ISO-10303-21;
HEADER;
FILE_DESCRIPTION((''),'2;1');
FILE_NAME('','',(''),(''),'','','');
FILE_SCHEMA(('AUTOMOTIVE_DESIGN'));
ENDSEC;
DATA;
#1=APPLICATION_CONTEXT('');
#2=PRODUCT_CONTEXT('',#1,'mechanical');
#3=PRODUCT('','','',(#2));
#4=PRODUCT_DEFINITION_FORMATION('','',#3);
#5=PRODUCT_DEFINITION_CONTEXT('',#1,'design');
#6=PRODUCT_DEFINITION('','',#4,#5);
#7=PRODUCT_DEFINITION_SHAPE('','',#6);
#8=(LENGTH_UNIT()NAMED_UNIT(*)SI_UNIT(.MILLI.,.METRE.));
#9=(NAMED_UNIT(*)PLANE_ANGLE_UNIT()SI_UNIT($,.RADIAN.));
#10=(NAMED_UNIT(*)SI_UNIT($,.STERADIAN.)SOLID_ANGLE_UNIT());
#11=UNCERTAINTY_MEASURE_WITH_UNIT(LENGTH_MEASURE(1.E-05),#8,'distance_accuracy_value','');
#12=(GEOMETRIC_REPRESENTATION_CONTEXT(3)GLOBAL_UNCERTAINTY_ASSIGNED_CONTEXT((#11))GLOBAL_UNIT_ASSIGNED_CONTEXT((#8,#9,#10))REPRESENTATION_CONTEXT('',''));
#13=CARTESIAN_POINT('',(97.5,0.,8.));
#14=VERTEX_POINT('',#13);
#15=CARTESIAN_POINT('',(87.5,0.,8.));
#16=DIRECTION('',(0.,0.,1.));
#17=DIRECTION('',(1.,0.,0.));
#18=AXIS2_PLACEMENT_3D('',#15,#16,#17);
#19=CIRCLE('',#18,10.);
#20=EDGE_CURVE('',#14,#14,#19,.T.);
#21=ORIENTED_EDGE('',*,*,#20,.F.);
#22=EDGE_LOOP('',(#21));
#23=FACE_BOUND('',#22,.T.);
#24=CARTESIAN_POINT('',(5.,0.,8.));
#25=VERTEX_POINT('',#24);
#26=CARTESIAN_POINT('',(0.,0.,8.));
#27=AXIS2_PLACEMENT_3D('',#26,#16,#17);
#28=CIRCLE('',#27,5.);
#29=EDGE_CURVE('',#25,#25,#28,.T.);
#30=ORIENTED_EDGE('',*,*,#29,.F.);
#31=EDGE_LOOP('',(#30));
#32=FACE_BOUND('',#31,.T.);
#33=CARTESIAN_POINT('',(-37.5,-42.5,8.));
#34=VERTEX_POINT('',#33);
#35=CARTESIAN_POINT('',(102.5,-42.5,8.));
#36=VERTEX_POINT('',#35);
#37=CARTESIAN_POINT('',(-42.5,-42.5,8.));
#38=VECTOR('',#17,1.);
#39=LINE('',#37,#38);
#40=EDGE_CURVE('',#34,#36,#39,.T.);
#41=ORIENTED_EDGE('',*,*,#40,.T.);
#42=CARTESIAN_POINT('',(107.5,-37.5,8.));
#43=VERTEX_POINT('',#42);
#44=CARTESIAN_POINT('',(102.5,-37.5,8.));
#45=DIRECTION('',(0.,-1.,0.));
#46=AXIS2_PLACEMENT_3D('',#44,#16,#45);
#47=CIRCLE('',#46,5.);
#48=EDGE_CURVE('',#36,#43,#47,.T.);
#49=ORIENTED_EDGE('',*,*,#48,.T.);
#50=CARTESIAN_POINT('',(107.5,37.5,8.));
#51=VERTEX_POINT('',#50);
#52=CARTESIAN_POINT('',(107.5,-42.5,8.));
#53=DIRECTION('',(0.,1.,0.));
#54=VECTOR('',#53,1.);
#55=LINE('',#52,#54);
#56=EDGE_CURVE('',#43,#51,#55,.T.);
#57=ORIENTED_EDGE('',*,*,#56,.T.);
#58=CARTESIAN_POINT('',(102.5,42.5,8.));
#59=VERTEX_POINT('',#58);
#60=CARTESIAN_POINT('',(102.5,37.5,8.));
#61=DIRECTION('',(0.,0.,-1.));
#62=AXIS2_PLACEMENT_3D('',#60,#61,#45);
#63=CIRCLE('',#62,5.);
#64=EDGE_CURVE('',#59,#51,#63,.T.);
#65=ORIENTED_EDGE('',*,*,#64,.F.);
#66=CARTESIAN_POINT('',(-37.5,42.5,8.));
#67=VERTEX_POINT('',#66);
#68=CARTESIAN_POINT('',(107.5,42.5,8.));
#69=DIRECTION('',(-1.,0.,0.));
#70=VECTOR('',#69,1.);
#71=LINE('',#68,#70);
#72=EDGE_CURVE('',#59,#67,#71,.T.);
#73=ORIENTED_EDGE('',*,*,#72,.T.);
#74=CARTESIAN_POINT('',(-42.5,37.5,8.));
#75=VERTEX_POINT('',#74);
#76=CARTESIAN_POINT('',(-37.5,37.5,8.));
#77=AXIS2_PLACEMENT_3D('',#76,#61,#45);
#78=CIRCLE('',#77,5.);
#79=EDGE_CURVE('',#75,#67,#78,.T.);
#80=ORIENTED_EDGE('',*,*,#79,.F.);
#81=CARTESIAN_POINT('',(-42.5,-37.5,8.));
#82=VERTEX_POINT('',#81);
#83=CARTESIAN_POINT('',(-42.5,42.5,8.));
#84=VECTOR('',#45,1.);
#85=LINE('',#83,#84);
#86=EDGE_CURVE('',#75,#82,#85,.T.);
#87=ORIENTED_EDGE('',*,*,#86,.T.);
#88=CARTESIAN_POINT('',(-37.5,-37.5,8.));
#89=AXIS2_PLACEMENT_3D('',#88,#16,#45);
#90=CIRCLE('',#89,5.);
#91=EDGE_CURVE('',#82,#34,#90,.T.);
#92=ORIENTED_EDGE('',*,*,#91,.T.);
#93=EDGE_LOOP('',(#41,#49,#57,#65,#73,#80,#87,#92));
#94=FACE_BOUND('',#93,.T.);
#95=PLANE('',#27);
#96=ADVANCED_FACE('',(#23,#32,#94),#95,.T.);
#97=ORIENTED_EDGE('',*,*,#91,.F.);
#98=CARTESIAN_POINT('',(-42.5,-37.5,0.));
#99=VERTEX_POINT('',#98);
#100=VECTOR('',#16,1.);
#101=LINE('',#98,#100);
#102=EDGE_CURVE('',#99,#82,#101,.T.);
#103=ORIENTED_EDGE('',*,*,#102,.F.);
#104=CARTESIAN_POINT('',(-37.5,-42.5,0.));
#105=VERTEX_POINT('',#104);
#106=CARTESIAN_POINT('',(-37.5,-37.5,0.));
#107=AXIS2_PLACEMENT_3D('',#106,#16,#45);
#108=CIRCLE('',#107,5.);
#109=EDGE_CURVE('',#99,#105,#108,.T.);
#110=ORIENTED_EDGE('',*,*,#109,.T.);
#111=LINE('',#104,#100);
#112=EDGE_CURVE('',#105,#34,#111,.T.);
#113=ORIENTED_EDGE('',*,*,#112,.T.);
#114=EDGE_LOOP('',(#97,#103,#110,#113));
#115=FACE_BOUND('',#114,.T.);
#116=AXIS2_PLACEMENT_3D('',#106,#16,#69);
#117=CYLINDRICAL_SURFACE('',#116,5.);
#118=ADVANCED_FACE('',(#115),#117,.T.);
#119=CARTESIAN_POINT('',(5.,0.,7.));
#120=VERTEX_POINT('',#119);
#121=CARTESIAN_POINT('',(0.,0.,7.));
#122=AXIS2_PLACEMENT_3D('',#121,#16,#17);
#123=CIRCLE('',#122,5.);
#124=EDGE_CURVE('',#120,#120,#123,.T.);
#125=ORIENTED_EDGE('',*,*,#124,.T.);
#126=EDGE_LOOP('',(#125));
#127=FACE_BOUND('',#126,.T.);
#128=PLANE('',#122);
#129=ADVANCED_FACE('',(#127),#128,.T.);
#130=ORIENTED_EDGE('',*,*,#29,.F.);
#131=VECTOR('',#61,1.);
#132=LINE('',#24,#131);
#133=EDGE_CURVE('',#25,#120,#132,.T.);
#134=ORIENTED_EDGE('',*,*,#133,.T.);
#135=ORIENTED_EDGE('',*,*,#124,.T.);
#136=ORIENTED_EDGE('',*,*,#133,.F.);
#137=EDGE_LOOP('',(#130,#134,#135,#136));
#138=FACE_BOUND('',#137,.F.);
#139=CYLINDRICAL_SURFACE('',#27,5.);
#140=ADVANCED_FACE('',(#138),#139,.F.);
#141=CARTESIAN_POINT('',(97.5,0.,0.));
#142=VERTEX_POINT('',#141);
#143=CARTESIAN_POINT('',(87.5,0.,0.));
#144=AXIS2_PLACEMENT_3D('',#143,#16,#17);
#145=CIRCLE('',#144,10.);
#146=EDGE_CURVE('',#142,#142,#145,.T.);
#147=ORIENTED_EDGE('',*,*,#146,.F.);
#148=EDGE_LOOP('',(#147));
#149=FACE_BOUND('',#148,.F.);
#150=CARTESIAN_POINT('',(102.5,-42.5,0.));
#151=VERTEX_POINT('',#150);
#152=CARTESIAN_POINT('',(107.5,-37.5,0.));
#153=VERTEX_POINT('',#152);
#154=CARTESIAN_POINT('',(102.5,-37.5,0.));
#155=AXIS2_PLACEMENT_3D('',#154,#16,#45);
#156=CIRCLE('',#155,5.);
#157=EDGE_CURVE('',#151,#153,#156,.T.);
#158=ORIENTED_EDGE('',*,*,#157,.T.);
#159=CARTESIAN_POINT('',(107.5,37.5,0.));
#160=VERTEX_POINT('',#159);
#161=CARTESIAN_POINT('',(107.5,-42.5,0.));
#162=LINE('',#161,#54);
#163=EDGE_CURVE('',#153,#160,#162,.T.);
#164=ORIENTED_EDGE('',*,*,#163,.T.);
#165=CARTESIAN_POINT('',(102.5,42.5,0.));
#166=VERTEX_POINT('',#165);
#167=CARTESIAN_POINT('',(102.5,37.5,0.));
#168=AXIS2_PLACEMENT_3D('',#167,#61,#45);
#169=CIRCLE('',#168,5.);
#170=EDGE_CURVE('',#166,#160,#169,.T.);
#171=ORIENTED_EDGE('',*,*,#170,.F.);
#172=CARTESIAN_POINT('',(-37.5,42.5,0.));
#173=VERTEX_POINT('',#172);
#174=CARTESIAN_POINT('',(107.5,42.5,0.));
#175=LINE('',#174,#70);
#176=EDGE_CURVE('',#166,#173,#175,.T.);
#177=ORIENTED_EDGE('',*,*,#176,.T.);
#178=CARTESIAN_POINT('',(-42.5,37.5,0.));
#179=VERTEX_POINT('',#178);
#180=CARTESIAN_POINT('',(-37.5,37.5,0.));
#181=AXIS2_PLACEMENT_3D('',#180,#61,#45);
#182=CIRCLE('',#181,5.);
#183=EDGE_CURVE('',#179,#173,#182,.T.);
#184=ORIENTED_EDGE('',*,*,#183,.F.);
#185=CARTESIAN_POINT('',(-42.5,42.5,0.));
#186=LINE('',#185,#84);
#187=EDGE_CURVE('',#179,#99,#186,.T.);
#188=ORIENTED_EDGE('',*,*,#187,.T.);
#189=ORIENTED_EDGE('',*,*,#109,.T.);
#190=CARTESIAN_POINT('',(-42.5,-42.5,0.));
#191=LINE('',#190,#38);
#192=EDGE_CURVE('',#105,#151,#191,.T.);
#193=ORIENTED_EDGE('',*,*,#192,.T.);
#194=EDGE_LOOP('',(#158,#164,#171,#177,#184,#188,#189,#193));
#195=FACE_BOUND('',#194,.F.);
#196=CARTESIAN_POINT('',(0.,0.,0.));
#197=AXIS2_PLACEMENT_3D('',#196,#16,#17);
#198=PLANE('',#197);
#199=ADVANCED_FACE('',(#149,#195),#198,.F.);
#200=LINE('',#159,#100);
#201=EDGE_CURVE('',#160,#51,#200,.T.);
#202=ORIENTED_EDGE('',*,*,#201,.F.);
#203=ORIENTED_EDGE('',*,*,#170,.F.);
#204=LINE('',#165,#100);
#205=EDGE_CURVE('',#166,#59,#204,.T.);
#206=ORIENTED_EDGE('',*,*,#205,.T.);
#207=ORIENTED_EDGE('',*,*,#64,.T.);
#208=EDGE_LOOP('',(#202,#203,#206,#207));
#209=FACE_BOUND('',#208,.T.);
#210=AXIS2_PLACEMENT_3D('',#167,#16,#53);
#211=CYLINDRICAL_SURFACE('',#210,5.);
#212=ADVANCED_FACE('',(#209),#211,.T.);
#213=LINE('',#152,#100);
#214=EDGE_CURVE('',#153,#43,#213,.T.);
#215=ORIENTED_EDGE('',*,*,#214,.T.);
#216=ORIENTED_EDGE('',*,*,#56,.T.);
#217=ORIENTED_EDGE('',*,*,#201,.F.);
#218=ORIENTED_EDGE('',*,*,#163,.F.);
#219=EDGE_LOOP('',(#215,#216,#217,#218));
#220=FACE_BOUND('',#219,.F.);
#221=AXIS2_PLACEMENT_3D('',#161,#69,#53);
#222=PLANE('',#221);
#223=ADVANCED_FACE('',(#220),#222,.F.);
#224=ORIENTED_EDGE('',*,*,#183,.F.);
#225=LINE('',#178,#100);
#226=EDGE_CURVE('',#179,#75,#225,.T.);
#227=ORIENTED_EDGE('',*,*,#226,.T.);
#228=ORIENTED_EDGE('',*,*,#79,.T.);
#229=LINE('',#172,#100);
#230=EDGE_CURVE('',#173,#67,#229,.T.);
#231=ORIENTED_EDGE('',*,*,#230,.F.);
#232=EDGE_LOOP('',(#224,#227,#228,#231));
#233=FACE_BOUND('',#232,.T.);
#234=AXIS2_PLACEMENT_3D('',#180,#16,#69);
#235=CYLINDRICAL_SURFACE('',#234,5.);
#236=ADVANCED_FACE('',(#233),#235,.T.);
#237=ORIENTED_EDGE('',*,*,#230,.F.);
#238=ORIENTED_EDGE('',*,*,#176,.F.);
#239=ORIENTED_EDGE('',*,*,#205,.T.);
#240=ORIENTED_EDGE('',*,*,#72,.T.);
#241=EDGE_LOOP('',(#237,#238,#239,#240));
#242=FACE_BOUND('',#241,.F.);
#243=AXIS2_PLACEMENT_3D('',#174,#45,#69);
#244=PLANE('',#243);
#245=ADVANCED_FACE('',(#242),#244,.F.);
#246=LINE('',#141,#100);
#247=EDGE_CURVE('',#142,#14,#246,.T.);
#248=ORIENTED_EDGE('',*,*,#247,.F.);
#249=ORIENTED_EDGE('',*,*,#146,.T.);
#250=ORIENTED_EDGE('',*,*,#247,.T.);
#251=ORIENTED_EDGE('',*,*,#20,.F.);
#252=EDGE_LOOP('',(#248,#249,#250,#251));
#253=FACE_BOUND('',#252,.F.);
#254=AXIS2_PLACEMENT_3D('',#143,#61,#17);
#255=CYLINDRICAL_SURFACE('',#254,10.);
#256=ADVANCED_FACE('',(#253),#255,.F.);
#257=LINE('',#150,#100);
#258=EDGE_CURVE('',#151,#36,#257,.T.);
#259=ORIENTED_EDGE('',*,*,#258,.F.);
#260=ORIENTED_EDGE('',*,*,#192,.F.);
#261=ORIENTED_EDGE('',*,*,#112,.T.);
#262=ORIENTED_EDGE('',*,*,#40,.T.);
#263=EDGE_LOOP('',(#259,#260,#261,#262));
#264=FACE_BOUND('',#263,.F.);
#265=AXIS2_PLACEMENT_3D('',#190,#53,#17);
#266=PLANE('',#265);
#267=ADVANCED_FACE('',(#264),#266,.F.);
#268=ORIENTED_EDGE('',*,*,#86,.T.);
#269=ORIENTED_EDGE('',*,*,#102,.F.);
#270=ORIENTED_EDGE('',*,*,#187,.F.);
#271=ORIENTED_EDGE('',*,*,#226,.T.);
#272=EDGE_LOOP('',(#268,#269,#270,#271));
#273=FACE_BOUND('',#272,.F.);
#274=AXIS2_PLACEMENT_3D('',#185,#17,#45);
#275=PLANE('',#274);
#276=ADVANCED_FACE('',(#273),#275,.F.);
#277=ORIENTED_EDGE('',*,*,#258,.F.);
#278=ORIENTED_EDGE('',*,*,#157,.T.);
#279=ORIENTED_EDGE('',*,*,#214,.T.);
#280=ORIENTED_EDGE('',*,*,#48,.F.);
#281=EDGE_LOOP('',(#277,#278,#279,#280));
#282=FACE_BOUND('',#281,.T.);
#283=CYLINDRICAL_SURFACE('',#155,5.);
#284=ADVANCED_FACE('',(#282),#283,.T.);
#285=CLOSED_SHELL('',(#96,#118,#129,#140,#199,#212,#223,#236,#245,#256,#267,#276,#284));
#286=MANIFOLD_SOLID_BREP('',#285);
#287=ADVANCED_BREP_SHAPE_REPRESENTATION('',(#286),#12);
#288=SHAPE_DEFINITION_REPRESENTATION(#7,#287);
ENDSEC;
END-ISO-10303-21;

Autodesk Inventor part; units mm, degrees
ref_plane "YZ Plane" through (0, 0, 0) normal (1, 0, 0) x (0, 1, 0)
ref_plane "XZ Plane" through (0, 0, 0) normal (0, 1, 0) x (-1, 0, 0)
ref_plane "XY Plane" through (0, 0, 0) normal (0, 0, 1) x (1, 0, 0)
sketch "Sketch1" plane through (0, 0, 0) normal (0, 0, 1) x (1, 0, 0)
  line L0 (-42.5, -42.5) -> (107.5, -42.5)
  line L1 (107.5, -42.5) -> (107.5, 42.5)
  line L2 (107.5, 42.5) -> (-42.5, 42.5)
  line L3 (-42.5, 42.5) -> (-42.5, -42.5)
  line L4 (-42.5, -42.5) -> (107.5, 42.5) construction
  line L5 (107.5, -42.5) -> (-42.5, 42.5) construction
  circle A0 centre (87.5, -22.5) radius 10
  circle A1 centre (87.5, 22.5) radius 10
  line L6 (32.5, 0) -> (107.5, 0) construction
  circle A2 centre (87.5, 0) radius 10
  line L7 (40, 40) -> (-40, 40)
  line L8 (-40, 40) -> (-40, -40)
  line L9 (-40, -40) -> (40, -40)
  line L10 (40, -40) -> (40, 40)
  line L11 (40, 40) -> (-40, -40) construction
  line L12 (-40, 40) -> (40, -40) construction
  point P0 (0, 0)
  dimension "d0" = 150
  dimension "d1" = 85
  dimension "d23" = 20
  dimension "d25" = 20
  dimension "d26" = 20
  dimension "d30" = 80
extrude "Plate1" add sketch "Sketch1" along normal blind 8 contours L3 L2 L1 L0 | A0 | A1 | L10 L9 L8 L7
fillet "Corner Round1" radius 5 4 edges at (107.5, -42.5, 4) (-42.5, -42.5, 4) (-42.5, 42.5, 4) (107.5, 42.5, 4)
sketch "Sketch5" plane through (0, 0, 8) normal (0, 0, 1) x (1, 0, 0)
  line L0 (102.5, -42.5) -> (-37.5, -42.5) projected
  line L1 (-42.5, -37.5) -> (-42.5, 37.5) projected
  line L2 (-37.5, 42.5) -> (102.5, 42.5) projected
  circle A0 centre (0, 0) radius 42.5
  circle A1 centre (0, 0) radius 5
  point P0 (0, 0)
  dimension "d27" = 10
extrude "Extrusion2" cut sketch "Sketch5" against normal blind 1 contours A1
equation "\"d26\" = d25"
equation "\"d2\" = Thickness"
equation "\"BendReliefWidth\" = Thickness"
equation "\"BendReliefDepth\" = 0.5 * Thickness"
equation "\"CornerReliefSize\" = 4 * Thickness"
equation "\"MinimumRemnant\" = 2 * Thickness"
equation "\"TransitionRadius\" = BendRadius"
equation "\"JacobiRadiusSize\" = BendRadius"
equation "\"GapSize\" = Thickness"
equation "\"Thickness\" = 8"
equation "\"BendRadius\" = 5"
properties part number "APN 1483 leg floor plate" material "Steel"
